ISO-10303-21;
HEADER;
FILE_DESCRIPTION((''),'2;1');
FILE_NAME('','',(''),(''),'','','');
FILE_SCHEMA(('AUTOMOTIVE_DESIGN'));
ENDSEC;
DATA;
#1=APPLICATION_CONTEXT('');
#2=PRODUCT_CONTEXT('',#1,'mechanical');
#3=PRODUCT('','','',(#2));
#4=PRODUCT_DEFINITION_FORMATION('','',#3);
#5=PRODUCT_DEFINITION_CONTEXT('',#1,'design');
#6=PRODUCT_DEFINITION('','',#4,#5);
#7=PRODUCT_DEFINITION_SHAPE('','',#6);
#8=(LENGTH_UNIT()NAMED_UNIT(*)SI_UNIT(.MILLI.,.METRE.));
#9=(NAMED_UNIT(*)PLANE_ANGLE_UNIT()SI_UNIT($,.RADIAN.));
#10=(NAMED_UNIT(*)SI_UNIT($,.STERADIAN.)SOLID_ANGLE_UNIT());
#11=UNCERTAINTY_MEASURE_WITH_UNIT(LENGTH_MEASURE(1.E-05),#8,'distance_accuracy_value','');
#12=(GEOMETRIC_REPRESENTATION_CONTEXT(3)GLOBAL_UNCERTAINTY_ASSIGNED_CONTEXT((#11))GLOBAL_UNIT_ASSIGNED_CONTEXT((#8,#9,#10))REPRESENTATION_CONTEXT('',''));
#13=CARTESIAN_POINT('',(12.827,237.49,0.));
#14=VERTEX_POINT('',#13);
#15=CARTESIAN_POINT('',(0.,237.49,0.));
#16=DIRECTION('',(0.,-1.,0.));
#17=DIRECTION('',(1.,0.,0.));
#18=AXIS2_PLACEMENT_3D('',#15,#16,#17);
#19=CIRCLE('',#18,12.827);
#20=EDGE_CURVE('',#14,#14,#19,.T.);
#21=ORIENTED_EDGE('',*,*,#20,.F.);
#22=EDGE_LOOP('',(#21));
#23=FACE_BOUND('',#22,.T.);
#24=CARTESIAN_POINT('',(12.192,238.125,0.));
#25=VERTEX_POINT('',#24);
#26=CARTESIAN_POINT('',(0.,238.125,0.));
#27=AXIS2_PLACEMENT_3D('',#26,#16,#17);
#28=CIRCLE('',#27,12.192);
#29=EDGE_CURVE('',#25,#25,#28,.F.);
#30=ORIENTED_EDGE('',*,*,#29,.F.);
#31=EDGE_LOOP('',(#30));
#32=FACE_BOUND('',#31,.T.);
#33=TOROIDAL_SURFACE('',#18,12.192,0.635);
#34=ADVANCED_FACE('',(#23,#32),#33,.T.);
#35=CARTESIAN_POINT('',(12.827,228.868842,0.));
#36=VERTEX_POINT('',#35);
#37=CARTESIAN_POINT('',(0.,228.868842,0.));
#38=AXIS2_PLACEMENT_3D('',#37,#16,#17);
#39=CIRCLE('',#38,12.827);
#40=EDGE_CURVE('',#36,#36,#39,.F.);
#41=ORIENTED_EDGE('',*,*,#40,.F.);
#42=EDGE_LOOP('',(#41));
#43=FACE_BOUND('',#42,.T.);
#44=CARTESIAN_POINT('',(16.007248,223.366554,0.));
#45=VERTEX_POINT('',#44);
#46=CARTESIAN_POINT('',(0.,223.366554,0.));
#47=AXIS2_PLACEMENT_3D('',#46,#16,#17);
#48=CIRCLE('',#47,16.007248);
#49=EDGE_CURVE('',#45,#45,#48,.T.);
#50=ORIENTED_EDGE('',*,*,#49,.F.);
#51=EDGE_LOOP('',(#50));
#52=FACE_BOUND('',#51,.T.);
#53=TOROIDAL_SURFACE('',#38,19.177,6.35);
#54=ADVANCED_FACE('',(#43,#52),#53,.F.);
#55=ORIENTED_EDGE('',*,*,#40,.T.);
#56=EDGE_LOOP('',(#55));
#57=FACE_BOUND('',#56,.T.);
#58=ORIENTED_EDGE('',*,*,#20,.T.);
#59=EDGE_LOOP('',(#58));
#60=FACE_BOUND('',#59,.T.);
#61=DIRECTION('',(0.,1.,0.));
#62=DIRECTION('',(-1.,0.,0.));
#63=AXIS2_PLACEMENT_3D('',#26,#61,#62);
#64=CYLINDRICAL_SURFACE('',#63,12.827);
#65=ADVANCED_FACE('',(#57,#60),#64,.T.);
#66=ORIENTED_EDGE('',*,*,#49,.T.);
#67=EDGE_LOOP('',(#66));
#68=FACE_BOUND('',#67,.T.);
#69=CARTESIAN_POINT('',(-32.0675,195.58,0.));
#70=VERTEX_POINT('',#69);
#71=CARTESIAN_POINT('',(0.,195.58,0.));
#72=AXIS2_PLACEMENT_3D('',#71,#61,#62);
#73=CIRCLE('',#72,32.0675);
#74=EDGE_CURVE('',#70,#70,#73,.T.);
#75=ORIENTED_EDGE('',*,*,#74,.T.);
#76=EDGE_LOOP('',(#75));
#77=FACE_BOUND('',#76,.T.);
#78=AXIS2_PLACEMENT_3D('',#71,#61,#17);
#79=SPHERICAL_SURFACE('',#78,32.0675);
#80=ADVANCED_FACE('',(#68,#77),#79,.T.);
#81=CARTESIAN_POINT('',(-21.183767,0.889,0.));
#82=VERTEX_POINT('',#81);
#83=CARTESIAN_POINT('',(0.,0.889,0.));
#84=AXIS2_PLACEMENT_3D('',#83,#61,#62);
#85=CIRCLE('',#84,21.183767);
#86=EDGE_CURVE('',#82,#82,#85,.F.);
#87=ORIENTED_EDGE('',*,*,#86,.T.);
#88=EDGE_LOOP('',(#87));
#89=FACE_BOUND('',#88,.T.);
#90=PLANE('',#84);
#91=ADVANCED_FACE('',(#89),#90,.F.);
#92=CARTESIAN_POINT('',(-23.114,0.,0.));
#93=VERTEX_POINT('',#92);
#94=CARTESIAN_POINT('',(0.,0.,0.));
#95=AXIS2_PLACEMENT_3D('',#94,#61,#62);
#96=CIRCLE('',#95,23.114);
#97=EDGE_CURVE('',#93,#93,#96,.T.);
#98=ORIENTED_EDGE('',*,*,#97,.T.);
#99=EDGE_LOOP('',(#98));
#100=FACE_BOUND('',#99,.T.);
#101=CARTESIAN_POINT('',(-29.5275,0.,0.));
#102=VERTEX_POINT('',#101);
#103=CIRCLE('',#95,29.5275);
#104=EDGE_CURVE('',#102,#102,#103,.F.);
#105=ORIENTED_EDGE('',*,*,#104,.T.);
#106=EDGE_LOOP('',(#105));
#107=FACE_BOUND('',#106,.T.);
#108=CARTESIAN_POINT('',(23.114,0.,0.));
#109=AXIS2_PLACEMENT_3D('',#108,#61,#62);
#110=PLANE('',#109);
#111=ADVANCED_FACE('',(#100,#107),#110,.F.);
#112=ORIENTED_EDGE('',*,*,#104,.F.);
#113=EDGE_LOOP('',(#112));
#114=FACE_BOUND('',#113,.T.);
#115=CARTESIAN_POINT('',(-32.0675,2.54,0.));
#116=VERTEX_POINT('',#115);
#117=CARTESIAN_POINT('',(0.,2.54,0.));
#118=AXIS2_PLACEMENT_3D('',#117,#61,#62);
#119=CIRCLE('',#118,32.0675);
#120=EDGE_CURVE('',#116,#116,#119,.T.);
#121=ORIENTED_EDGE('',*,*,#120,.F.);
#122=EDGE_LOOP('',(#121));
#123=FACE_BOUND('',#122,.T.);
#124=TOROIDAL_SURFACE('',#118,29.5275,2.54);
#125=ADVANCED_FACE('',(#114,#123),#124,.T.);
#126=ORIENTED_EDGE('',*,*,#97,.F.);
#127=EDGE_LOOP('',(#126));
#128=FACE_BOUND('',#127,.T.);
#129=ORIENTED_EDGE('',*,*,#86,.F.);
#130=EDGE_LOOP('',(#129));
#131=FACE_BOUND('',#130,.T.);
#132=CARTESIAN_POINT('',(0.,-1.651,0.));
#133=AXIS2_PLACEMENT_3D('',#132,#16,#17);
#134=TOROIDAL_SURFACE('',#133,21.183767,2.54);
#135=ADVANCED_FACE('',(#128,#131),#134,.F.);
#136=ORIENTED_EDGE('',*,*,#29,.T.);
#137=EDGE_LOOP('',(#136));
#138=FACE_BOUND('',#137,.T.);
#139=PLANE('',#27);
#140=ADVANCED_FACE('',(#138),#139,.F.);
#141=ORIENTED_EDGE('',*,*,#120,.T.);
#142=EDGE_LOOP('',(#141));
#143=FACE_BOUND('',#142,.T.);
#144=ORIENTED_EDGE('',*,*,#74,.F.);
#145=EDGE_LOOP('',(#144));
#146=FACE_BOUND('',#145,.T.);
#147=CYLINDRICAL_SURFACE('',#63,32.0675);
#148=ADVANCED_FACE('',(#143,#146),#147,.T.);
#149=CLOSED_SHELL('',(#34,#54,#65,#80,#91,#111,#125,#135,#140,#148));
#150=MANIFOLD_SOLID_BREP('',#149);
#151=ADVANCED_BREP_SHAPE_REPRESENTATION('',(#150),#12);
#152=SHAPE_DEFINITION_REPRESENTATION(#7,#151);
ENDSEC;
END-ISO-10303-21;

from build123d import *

# Parameters (mm, degrees)
FILLET1_R = 2.54
FILLET2_R = 0.635
FILLET3_R = 6.35


with BuildPart() as part:
    # Sketch2 → Revolve1 (revolve)
    with BuildSketch(Plane.XY, mode=Mode.PRIVATE) as revolve1_sk:
        with BuildLine():
            Line((32.0675, 0), (32.0675, 195.58))
            ThreePointArc((32.0675, 195.58), (26.829595401, 213.144093113), (12.827, 224.97034922))
            Line((12.827, 224.97034922), (12.827, 238.125))
            Line((12.827, 238.125), (0, 238.125))
            Line((0, 238.125), (0, 0.889))
            Line((0, 0.889), (23.114, 0.889))
            Line((23.114, 0.889), (23.114, 0))
            Line((23.114, 0), (32.0675, 0))
        make_face()
    revolve(revolve1_sk.sketch.rotate(Axis((0, 238.125, 0), (0, -1, 0)), 180), axis=Axis((0, 238.125, 0), (0, -1, 0)))

    # Fillet1
    # the kernel refuses this fillet: 2.54 mm, written as the material it adds along each edge
    with BuildSketch(Plane(origin=(0, 0.889, 0), x_dir=(-1, 0, 0), z_dir=(0, 0, 1))) as fillet1_piece_1:
        with BuildLine():
            CenterArc((21.183767112, 2.54), FILLET1_R, 270, 49.458398126)
            Line((23.114, 0.889), (23.114, 0))
            Line((23.114, 0), (21.183767112, 0))
        make_face()
    revolve(axis=Axis((0, 0.889, 0), (0, -1, 0)))
    # the kernel refuses this fillet: 2.54 mm, written as the material it takes off along each edge
    with BuildSketch(Plane(origin=(0, 0, 0), x_dir=(-1, 0, 0), z_dir=(0, 0, 1))) as fillet1_2_piece_1:
        with BuildLine():
            CenterArc((32.0675 - FILLET1_R, -FILLET1_R), FILLET1_R, 0, 90)
            Line((32.0675 - FILLET1_R, 0), (32.0675, 0))
            Line((32.0675, 0), (32.0675, -FILLET1_R))
        make_face()
    revolve(axis=Axis((0, 0, 0), (0, -1, 0)), mode=Mode.SUBTRACT)

    # Fillet2
    fillet2_edges = [part.edges().sort_by_distance(p)[0] for p in [
        (12.827, 238.125, 0),
    ]]
    fillet(fillet2_edges, radius=FILLET2_R)

    # Fillet3
    fillet3_edges = [part.edges().sort_by_distance(p)[0] for p in [
        (12.827, 224.97034922, 0),
    ]]
    fillet(fillet3_edges, radius=FILLET3_R)


solid = part.part
